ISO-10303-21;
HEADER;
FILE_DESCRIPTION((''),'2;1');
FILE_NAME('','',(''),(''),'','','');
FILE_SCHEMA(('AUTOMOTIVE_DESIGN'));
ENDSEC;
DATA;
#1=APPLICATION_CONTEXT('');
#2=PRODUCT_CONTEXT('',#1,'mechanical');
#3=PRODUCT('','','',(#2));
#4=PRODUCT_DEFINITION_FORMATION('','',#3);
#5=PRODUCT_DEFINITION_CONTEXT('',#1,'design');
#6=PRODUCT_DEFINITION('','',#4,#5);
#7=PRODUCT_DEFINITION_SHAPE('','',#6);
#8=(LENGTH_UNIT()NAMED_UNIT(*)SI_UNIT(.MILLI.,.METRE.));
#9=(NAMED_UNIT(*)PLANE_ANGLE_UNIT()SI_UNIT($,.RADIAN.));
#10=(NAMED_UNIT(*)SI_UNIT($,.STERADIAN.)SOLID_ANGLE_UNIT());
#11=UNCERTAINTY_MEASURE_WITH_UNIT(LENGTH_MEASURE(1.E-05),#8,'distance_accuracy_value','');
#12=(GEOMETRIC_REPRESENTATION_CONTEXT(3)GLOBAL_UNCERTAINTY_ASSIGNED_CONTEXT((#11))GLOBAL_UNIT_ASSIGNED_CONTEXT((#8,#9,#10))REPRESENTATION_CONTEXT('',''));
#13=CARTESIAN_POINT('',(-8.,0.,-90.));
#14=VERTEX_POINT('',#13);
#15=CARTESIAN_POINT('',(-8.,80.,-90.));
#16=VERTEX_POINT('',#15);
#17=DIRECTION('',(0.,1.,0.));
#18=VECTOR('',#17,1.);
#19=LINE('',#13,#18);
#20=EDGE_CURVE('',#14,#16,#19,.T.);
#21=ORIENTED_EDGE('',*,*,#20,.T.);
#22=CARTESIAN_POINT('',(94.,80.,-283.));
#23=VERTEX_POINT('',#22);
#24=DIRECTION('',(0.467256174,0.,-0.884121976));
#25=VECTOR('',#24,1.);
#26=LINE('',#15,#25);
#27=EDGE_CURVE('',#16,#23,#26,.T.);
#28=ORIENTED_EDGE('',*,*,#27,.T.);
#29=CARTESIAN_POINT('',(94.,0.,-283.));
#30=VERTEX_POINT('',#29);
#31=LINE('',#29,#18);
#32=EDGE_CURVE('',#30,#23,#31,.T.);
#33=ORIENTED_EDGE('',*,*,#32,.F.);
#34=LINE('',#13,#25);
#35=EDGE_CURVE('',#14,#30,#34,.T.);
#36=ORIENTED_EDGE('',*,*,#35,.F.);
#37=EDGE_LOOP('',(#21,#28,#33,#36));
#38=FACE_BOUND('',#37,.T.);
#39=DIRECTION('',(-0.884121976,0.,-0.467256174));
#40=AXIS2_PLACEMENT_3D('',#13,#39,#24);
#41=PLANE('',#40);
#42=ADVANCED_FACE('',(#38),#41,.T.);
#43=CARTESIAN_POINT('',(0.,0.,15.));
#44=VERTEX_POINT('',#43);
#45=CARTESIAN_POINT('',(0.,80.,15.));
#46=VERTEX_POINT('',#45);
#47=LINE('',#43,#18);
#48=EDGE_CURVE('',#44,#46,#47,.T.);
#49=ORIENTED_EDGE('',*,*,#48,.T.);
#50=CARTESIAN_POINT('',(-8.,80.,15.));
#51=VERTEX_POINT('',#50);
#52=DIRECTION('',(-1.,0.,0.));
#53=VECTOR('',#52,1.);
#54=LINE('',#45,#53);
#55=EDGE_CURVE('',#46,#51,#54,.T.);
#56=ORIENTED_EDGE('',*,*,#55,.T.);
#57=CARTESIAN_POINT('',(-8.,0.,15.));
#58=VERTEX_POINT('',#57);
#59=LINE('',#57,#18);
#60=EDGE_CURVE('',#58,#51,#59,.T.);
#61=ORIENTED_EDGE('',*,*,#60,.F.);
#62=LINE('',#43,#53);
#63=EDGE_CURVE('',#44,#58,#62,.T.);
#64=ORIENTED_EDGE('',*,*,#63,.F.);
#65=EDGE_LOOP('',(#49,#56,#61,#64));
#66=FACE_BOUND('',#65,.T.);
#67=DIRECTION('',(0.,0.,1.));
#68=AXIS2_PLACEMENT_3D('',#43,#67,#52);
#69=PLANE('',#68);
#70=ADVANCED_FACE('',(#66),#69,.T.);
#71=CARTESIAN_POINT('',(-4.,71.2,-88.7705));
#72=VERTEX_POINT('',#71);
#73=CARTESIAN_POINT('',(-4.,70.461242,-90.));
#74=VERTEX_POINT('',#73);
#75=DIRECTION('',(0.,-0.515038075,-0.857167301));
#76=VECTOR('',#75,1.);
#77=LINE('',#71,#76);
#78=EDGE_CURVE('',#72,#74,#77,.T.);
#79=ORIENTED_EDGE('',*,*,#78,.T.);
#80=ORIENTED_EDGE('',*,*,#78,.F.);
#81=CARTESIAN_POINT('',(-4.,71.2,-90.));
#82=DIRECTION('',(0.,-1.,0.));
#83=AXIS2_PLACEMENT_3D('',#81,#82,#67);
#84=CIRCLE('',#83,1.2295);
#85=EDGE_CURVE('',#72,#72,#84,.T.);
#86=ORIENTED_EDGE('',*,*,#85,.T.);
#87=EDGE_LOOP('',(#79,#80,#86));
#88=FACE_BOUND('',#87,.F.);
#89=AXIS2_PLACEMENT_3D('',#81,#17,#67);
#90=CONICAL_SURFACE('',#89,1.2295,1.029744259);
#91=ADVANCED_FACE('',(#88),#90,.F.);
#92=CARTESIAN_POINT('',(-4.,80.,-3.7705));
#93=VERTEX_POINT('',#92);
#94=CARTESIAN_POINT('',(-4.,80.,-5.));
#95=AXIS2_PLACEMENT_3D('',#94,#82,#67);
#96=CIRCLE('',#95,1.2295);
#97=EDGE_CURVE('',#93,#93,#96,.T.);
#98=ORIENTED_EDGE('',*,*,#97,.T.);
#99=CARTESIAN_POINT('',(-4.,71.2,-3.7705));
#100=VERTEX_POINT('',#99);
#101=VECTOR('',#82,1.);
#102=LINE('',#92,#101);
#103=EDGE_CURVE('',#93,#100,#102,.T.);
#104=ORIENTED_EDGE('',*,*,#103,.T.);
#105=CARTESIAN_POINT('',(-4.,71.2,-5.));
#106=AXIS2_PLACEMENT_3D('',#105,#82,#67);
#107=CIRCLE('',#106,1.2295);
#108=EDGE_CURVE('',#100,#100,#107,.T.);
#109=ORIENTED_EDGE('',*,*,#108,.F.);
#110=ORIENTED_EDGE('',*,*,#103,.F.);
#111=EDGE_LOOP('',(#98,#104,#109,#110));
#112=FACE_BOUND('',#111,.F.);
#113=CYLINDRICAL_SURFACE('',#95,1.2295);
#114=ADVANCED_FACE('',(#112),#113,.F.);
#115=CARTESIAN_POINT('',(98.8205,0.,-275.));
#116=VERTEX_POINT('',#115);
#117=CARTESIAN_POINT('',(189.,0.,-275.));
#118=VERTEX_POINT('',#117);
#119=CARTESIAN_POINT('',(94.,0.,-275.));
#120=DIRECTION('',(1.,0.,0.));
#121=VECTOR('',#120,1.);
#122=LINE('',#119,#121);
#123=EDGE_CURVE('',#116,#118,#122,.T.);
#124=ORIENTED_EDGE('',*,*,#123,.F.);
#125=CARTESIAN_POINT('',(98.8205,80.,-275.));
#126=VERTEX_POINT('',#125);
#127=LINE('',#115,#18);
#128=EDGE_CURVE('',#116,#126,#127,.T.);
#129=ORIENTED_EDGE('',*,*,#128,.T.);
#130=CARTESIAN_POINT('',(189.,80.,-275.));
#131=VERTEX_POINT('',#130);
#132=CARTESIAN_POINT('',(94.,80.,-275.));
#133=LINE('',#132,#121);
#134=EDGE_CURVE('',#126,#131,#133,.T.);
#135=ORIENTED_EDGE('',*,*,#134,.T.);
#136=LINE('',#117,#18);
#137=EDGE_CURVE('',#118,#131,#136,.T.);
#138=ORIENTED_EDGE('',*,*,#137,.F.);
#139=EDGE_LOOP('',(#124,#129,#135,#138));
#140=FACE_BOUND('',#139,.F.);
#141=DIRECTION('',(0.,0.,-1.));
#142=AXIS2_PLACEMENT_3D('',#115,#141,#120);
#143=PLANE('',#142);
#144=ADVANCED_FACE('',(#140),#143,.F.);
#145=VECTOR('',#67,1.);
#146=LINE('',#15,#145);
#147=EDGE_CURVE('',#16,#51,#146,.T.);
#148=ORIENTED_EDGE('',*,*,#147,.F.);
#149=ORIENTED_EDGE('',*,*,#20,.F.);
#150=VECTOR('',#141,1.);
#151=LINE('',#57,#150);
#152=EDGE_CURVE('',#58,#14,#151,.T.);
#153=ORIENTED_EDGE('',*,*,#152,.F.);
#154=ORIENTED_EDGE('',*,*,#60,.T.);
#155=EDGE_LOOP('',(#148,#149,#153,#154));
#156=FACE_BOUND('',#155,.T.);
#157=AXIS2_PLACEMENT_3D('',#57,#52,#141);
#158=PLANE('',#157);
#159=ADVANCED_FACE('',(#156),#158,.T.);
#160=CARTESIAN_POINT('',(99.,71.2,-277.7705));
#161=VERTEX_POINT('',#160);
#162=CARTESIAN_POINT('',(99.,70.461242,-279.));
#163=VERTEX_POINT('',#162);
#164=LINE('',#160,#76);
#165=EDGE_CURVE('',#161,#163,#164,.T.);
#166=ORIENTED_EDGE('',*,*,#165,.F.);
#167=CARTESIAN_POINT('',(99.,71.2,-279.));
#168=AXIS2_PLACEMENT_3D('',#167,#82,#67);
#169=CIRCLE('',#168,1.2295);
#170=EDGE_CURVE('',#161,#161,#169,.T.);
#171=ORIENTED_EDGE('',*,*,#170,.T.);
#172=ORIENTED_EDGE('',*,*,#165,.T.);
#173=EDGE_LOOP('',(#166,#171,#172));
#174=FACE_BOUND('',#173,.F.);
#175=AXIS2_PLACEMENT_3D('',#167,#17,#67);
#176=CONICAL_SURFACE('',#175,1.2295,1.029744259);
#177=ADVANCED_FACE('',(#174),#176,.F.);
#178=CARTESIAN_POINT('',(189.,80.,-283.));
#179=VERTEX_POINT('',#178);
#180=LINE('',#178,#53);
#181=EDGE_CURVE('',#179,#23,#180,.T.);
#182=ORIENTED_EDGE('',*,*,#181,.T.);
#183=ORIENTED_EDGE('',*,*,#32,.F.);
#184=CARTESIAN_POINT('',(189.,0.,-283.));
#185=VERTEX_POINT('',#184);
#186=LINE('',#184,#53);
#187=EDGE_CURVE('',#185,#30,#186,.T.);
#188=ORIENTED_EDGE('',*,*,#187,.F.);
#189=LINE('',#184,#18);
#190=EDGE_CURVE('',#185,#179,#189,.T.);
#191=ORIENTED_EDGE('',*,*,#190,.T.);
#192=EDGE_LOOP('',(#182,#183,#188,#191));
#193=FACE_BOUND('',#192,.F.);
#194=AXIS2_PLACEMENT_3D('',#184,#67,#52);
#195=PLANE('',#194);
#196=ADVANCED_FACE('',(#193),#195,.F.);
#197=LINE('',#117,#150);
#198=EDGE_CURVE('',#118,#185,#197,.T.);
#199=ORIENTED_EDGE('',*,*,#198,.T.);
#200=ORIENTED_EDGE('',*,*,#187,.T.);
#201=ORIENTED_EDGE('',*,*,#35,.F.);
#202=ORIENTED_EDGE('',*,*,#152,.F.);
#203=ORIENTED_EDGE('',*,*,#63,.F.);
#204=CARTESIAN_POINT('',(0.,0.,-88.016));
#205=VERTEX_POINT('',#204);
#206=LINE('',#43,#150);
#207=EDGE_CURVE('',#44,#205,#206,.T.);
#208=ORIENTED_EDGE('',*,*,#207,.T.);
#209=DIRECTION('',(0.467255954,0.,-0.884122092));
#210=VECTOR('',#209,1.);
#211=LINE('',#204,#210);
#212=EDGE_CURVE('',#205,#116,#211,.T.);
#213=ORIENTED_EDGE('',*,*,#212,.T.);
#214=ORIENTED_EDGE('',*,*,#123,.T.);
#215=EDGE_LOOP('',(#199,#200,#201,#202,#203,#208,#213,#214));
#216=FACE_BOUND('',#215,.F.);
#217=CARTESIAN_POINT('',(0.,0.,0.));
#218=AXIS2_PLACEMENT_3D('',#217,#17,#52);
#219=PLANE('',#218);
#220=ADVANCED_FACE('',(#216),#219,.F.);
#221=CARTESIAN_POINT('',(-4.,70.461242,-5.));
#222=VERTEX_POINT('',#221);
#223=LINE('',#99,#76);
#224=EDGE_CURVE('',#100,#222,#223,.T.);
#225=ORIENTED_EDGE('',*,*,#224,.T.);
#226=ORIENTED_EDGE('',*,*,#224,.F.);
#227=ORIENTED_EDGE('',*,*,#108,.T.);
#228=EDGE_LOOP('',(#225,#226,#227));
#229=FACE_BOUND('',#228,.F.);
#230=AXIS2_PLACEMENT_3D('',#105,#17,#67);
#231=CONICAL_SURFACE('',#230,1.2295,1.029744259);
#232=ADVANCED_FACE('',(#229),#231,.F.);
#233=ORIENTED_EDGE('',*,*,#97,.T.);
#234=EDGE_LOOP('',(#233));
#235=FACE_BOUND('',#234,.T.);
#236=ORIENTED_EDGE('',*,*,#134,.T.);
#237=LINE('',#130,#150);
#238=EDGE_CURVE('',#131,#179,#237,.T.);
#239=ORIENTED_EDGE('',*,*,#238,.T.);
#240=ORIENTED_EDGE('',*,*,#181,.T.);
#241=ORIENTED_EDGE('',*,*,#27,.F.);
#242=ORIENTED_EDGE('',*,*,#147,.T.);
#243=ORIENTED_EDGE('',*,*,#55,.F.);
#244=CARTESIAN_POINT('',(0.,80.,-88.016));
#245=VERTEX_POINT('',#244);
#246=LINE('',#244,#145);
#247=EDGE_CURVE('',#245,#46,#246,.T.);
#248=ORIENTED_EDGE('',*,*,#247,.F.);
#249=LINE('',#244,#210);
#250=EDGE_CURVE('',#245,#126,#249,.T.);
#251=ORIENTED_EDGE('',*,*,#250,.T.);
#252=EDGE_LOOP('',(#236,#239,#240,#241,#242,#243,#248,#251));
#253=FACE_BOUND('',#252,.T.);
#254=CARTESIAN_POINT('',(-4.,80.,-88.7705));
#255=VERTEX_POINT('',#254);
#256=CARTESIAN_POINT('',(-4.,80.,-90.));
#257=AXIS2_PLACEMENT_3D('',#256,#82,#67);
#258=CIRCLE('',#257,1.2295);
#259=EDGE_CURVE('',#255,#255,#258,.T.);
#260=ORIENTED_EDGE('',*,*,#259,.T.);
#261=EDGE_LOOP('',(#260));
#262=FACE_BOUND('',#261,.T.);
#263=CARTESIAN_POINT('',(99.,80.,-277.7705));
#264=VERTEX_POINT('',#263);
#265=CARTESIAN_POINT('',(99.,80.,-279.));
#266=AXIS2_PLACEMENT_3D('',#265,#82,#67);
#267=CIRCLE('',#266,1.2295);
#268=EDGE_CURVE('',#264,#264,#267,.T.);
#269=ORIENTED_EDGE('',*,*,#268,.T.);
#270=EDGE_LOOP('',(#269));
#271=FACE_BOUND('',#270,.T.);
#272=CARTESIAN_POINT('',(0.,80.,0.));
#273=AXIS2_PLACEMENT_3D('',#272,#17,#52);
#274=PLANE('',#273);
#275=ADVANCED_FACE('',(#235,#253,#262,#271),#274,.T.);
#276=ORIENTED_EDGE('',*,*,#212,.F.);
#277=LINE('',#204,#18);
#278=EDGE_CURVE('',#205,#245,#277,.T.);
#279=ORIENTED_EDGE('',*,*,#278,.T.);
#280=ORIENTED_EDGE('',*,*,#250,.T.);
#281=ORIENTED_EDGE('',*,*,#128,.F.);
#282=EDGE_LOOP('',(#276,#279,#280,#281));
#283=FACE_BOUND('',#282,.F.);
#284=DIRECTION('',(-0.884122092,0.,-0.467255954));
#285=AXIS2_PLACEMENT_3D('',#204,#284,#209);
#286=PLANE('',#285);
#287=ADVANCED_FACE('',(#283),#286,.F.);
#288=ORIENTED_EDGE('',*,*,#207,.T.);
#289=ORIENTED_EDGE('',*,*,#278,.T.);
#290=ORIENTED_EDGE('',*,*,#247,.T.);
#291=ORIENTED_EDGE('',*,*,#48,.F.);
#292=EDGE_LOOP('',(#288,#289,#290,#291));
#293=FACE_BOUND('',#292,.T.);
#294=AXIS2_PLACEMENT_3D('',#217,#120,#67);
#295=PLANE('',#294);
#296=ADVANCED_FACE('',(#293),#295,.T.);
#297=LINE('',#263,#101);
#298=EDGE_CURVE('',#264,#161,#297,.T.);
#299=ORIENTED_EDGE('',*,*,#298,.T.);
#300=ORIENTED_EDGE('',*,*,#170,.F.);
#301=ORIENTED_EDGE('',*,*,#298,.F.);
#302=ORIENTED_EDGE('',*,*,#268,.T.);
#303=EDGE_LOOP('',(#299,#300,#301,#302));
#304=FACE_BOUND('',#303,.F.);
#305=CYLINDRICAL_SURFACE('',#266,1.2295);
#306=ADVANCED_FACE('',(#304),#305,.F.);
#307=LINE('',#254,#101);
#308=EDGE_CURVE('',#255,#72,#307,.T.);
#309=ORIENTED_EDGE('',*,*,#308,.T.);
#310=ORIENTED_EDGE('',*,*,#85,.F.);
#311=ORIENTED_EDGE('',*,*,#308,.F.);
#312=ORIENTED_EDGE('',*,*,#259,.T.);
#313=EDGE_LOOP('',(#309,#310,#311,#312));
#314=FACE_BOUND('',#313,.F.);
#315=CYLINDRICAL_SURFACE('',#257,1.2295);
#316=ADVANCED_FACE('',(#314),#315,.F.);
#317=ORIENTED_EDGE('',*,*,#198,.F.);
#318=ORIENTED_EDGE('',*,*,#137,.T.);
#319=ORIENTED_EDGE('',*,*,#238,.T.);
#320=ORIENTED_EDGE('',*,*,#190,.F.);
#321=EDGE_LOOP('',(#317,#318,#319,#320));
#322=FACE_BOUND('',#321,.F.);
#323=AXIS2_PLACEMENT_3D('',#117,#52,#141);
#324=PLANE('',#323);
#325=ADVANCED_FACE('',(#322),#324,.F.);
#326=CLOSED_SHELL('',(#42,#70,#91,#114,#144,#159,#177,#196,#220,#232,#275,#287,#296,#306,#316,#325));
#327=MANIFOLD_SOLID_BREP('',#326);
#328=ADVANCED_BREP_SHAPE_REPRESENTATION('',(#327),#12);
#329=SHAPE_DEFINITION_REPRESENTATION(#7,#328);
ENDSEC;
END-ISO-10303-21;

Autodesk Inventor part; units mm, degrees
ref_plane "YZ Plane" through (0, 0, 0) normal (1, 0, 0) x (0, 1, 0)
ref_plane "XZ Plane" through (0, 0, 0) normal (0, 1, 0) x (-1, 0, 0)
ref_plane "XY Plane" through (0, 0, 0) normal (0, 0, 1) x (1, 0, 0)
sketch "スケッチ1" plane through (0, 0, 0) normal (0, 1, 0) x (-1, 0, 0)
  line L0 (0, 0) -> (8, 0)
  line L1 (8, 0) -> (8, -90)
  line L2 (8, -90) -> (0, -90)
  line L3 (0, -90) -> (0, 0)
  line L4 (-94, -275) -> (-189, -275)
  line L5 (-189, -275) -> (-189, -283)
  line L6 (-189, -283) -> (-94, -283)
  line L7 (-94, -283) -> (-94, -275)
  line L8 (8, -90) -> (-94, -283)
  line L9 (0, -88.016) -> (-98.8205, -275)
  line L10 (8, 0) -> (0, 0)
  line L11 (0, 0) -> (0, 15)
  line L12 (0, 15) -> (8, 15)
  line L13 (8, 15) -> (8, 0)
  dimension "d0" = 8
  dimension "d1" = 90
  dimension "d4" = 8
  dimension "d5" = 185
  dimension "d6" = 94
  dimension "d7" = 8
  dimension "d20" = 95
  dimension "d21" = 15
extrude "押し出し1" add sketch "スケッチ1" along normal blind 80
sketch "スケッチ2" plane through (0, 80, 0) normal (0, 1, 0) x (1, 0, 0)
  line L0 (0, -15) -> (0, 88.016) projected
  point P0 (-4, 5)
  point P1 (-4, 90)
  point P2 (99, 279)
  point P3 (-4, 0)
  dimension "d8" = 5
  dimension "d9" = 85
  dimension "d11" = 189
  dimension "d12" = 103
  dimension "d22" = 4
hole "穴1" at (-4, 80, -5) at (-4, 80, -90) at (99, 80, -279) direction (0, -1, 0) diameter 2.459 depth 8.8 tip angle 118 thread size "M3x0.5" class "6H" standard "ISO Metric profile"
properties part number "右仕切り"
